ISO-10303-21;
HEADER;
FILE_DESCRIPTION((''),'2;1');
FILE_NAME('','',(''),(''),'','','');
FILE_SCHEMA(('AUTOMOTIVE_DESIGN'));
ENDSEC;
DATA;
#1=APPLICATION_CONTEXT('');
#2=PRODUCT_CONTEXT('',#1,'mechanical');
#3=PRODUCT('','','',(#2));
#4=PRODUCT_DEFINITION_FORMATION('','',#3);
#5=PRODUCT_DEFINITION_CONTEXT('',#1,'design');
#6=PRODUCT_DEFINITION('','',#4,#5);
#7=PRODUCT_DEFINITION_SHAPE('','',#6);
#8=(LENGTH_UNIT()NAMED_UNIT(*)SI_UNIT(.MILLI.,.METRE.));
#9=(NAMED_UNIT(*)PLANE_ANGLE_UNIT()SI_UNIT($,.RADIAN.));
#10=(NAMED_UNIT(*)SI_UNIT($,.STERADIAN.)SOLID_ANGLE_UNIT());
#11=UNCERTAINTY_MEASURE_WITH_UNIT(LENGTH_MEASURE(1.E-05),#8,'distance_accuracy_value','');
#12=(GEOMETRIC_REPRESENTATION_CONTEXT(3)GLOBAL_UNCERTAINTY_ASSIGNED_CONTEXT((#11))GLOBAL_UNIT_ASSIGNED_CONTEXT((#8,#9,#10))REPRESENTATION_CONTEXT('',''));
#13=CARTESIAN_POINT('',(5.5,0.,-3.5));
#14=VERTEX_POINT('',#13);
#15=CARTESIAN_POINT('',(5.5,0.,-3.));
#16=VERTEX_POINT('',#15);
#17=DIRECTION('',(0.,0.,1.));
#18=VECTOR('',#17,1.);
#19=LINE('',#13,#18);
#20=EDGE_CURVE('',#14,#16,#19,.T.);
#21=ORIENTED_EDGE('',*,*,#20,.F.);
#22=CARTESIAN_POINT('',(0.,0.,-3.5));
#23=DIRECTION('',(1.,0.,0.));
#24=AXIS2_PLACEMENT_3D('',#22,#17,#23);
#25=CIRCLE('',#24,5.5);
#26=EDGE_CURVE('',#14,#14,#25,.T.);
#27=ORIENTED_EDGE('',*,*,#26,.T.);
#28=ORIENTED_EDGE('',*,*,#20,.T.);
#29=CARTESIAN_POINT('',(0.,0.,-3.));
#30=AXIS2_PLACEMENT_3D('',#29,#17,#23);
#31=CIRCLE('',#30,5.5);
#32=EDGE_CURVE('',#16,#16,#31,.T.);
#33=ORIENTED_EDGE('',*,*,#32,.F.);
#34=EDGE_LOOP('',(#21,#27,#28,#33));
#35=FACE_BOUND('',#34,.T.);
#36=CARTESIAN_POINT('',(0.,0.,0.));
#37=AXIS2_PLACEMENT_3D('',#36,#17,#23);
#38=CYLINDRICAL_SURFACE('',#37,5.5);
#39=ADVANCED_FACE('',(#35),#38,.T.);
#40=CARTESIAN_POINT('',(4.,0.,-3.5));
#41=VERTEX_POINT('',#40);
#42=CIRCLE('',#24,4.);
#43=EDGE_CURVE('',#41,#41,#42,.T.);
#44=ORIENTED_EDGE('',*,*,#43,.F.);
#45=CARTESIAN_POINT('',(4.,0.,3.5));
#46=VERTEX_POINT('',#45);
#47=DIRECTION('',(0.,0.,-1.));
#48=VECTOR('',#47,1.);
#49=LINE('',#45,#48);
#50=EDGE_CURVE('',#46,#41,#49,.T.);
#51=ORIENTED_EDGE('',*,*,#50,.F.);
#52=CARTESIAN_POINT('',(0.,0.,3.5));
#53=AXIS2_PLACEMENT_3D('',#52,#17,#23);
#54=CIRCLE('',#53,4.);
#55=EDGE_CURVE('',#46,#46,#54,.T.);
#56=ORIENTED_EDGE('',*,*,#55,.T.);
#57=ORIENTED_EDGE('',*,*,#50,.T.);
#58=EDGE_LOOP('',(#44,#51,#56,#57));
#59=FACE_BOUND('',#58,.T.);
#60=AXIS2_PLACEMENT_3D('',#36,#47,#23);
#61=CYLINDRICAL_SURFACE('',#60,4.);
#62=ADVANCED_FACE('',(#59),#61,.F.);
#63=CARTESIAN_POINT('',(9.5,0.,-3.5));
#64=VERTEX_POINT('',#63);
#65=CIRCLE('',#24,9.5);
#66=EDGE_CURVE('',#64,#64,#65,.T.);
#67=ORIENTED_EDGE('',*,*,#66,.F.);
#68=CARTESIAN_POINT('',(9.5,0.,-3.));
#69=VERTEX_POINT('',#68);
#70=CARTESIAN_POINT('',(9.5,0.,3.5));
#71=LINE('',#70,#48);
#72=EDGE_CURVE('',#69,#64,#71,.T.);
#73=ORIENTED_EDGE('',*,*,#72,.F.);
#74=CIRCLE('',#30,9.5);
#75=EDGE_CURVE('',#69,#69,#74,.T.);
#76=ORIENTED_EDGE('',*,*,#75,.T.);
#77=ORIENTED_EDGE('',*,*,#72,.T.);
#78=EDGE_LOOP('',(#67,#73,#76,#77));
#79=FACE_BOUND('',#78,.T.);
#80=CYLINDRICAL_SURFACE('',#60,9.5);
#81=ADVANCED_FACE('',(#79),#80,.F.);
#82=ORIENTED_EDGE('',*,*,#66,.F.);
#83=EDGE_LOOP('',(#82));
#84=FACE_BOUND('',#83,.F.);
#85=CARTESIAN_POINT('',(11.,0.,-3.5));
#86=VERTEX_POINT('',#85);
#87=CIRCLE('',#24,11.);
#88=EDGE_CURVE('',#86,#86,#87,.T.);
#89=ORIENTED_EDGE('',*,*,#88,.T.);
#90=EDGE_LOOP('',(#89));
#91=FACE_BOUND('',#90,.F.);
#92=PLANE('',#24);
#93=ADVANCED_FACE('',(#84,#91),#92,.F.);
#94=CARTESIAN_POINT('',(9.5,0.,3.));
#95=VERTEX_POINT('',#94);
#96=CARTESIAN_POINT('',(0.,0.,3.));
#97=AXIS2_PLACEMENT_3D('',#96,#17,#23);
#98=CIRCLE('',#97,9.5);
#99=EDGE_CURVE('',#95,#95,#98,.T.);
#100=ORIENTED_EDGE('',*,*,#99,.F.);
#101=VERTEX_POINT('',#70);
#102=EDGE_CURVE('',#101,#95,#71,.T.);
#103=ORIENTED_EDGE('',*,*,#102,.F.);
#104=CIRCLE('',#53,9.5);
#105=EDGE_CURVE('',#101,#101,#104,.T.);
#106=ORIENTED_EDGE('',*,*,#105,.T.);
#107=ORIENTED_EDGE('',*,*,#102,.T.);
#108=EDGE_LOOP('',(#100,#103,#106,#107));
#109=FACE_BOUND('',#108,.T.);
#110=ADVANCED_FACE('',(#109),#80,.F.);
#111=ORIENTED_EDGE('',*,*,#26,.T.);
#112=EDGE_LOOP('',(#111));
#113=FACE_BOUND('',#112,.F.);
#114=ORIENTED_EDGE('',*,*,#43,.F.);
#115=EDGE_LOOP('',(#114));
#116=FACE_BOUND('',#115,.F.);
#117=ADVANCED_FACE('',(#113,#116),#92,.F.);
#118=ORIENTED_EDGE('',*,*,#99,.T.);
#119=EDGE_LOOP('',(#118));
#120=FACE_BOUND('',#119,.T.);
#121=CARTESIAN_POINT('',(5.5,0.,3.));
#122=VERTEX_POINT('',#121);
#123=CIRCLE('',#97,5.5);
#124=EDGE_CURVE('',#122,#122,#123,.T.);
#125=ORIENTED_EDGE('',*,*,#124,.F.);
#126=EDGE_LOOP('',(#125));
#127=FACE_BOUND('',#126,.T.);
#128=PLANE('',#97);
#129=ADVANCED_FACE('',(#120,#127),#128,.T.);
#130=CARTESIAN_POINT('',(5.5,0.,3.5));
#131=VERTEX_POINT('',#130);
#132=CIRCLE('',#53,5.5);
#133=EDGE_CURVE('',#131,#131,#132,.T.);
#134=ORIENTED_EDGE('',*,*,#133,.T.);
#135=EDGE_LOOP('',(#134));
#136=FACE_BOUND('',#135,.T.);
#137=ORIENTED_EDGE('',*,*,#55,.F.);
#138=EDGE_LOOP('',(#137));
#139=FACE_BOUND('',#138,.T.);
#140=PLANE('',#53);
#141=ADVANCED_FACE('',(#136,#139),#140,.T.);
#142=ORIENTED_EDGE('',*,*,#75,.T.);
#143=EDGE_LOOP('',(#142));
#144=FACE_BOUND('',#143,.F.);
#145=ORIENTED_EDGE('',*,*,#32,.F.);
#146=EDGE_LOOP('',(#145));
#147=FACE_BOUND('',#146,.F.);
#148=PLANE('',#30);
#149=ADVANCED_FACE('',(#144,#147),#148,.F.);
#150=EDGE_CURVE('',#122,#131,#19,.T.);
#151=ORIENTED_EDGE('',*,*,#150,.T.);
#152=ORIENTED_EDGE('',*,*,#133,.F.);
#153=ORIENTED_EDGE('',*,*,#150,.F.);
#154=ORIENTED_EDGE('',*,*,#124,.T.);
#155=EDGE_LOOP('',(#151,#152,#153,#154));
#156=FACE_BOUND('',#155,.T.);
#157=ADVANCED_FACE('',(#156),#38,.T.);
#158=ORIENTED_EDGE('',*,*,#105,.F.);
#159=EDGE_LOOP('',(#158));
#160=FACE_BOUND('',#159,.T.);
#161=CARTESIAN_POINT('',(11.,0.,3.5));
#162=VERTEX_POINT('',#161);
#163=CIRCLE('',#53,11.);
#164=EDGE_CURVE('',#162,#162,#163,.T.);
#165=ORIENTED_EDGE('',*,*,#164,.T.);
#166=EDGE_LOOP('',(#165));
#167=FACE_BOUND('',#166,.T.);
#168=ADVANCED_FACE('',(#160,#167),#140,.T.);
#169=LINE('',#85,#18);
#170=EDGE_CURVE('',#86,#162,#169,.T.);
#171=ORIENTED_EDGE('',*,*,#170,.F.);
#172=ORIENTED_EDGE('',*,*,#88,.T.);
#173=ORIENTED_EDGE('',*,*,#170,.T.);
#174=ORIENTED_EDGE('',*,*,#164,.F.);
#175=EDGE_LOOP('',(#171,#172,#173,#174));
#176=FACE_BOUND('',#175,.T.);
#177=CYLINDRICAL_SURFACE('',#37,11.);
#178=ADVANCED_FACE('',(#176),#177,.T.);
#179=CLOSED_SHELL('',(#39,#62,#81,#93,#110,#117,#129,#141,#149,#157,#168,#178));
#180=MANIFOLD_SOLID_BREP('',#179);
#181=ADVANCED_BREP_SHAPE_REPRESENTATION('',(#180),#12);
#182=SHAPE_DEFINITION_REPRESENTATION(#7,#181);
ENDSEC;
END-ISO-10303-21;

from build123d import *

# Parameters (mm, degrees)
F0_R     = 11
F0_R_2   = 9.5
F1_DEPTH = 3.5
F0_R_3   = 5.5
F0_R_4   = 4
F2_DEPTH = 3


with BuildPart() as f1:
    # F0 (on Top) → F1 (new body, symmetric)
    with BuildSketch(Plane.XY):
        Circle(F0_R)
        Circle(F0_R_2, mode=Mode.SUBTRACT)
    extrude(amount=F1_DEPTH, both=True)



with BuildPart() as f1b:
    # F0 (on Top) → F1, piece 2 (new body, symmetric)
    with BuildSketch(Plane.XY):
        Circle(F0_R_3)
        Circle(F0_R_4, mode=Mode.SUBTRACT)
    extrude(amount=F1_DEPTH, both=True)


with BuildPart() as f1_1:
    add(f1.part)

    add(f1b.part)  # F2 merges F1b
    # F0 (on Top) → F2 (join, symmetric)
    with BuildSketch(Plane.XY):
        Circle(F0_R_2)
        Circle(F0_R_3, mode=Mode.SUBTRACT)
    extrude(amount=F2_DEPTH, both=True)


solid = f1_1.part
